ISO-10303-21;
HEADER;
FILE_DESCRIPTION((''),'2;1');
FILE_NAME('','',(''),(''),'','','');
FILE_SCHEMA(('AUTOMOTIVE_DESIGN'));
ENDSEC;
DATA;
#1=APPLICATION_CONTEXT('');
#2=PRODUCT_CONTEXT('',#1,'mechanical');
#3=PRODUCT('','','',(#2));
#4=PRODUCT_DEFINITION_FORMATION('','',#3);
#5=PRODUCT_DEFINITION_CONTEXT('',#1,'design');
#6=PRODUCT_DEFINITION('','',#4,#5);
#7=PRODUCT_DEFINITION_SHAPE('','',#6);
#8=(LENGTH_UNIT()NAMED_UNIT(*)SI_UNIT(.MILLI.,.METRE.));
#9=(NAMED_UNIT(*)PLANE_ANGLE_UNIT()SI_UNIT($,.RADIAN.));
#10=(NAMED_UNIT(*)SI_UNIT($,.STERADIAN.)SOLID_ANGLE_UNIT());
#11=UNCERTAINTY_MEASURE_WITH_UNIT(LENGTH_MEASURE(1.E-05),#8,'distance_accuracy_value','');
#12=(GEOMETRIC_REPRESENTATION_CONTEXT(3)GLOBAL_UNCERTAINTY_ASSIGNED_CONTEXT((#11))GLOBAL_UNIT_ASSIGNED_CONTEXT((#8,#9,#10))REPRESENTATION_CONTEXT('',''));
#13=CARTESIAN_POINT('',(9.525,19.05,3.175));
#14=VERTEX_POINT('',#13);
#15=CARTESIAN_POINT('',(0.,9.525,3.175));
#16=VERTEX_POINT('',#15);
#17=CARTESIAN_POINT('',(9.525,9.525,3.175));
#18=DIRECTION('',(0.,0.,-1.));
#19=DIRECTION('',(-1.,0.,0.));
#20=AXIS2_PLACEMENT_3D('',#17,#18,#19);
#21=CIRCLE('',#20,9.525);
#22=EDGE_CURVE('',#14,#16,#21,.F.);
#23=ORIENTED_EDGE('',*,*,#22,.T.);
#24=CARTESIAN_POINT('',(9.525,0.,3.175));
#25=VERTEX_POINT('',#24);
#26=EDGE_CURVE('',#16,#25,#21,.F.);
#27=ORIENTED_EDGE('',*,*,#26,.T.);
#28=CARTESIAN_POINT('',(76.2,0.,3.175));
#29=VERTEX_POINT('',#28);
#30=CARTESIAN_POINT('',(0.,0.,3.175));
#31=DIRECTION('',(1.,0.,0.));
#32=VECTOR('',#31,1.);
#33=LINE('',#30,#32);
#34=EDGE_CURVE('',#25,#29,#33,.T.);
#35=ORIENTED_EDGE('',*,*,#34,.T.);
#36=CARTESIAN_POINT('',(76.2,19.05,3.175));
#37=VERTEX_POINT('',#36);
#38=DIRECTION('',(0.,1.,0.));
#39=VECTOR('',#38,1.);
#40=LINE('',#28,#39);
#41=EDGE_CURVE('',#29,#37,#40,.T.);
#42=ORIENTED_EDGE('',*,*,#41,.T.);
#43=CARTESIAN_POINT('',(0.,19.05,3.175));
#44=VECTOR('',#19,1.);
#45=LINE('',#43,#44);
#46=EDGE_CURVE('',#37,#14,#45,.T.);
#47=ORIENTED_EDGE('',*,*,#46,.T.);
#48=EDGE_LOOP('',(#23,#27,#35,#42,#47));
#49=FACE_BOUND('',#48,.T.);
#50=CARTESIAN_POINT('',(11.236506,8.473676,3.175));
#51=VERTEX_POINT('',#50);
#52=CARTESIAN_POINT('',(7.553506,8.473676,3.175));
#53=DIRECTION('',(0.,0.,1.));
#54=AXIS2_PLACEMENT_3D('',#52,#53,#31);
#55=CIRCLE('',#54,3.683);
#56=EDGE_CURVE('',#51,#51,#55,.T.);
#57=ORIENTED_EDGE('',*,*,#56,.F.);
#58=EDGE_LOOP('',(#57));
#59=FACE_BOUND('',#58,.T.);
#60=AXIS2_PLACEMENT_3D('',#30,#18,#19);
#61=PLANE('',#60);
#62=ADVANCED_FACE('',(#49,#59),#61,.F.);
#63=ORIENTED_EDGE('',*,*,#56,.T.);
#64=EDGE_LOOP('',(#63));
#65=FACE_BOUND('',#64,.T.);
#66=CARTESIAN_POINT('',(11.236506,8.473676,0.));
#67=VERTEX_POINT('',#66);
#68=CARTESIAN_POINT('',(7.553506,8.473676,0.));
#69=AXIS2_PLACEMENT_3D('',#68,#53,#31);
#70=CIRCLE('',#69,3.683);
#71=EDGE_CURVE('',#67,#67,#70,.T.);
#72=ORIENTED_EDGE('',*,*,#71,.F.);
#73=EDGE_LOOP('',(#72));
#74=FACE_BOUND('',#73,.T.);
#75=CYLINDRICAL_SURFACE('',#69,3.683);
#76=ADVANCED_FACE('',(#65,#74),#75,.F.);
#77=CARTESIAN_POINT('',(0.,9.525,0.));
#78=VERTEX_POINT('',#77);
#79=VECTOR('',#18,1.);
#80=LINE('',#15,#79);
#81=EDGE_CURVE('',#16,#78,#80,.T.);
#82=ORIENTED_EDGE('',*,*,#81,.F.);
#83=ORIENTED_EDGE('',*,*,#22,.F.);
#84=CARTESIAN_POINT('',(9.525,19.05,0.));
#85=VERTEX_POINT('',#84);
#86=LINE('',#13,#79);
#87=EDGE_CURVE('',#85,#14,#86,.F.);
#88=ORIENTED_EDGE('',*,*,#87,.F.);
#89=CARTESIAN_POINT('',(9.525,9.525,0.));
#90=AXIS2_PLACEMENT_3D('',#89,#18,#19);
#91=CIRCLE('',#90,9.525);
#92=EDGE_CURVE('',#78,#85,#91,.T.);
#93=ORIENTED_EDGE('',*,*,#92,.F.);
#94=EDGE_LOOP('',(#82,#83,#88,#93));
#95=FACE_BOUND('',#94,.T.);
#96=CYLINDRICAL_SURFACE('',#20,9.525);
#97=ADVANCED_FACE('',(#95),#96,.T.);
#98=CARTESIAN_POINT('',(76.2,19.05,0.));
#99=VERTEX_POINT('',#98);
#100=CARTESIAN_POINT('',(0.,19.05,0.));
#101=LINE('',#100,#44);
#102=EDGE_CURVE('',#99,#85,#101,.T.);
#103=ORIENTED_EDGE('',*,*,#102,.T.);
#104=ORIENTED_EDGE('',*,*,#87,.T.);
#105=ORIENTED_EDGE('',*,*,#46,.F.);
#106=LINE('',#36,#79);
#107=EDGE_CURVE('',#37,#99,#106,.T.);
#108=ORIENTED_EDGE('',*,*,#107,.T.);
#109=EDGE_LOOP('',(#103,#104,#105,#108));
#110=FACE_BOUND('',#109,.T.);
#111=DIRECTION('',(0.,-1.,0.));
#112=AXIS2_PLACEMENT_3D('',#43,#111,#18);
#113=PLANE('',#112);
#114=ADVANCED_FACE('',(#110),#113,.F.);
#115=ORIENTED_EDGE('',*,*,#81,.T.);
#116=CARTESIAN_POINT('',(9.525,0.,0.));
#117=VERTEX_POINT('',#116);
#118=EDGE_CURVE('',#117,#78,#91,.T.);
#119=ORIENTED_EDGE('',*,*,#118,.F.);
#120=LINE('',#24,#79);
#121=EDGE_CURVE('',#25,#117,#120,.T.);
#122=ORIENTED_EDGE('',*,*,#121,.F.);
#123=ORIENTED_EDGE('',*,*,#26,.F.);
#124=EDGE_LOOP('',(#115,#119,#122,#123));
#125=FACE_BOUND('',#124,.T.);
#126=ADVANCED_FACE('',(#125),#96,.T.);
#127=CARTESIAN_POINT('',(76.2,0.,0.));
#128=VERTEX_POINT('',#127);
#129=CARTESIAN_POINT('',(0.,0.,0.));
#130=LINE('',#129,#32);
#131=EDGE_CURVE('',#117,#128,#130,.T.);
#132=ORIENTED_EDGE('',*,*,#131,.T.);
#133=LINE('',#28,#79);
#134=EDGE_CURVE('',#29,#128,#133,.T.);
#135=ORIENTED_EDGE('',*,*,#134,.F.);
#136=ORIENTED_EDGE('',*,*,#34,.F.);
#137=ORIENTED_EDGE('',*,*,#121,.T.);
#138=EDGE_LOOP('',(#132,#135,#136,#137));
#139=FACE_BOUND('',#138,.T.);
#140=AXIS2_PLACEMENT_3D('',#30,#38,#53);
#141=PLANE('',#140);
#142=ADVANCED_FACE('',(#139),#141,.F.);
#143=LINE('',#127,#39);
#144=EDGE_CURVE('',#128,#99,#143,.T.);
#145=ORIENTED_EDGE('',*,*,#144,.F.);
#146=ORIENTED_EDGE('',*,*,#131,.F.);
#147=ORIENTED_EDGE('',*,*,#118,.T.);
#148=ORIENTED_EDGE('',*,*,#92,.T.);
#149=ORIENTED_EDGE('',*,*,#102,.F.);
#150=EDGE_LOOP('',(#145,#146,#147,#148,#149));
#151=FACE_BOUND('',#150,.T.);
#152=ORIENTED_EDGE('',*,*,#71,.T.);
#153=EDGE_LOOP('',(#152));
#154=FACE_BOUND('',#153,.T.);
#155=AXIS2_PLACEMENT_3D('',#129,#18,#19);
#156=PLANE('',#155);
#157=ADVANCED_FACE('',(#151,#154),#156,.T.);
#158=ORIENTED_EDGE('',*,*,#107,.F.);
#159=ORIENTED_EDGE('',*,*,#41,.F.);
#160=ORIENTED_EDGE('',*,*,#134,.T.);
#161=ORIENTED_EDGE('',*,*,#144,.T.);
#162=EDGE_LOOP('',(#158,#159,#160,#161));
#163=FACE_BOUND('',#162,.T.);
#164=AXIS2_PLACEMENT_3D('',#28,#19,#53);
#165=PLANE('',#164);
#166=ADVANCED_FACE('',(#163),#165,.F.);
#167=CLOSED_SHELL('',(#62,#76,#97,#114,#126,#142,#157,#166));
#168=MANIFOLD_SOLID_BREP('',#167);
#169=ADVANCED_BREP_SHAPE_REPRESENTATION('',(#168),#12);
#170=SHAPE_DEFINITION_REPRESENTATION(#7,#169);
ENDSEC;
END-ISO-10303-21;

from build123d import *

# Parameters (mm, degrees)
SKETCH1_W           = 76.2
SKETCH1_H           = 19.05
BOSS_EXTRUDE1_DEPTH = 3.175
FILLET1_R           = 9.525
SKETCH2_R           = 3.683
CUT_EXTRUDE1_DEPTH  = 79.60930686


with BuildPart() as part:
    # Sketch1 → Boss-Extrude1 (new body)
    with BuildSketch(Plane.XY):
        with Locations((38.1, 9.525)):
            Rectangle(SKETCH1_W, SKETCH1_H)
    extrude(amount=BOSS_EXTRUDE1_DEPTH)

    # Fillet1
    fillet1_edges = [part.edges().sort_by_distance(p)[0] for p in [
        (0, 0, 1.5875),
        (0, 19.05, 1.5875),
    ]]
    fillet(fillet1_edges, radius=FILLET1_R - 0.0001)  # a hair under: the kernel refuses the full size

    # Sketch2 → Cut-Extrude1 (cut, through all)
    with BuildSketch(Plane.XY.offset(3.175)):
        with Locations((7.553506199, 8.47367626)):
            Circle(SKETCH2_R)
    extrude(amount=-CUT_EXTRUDE1_DEPTH, mode=Mode.SUBTRACT)


solid = part.part
